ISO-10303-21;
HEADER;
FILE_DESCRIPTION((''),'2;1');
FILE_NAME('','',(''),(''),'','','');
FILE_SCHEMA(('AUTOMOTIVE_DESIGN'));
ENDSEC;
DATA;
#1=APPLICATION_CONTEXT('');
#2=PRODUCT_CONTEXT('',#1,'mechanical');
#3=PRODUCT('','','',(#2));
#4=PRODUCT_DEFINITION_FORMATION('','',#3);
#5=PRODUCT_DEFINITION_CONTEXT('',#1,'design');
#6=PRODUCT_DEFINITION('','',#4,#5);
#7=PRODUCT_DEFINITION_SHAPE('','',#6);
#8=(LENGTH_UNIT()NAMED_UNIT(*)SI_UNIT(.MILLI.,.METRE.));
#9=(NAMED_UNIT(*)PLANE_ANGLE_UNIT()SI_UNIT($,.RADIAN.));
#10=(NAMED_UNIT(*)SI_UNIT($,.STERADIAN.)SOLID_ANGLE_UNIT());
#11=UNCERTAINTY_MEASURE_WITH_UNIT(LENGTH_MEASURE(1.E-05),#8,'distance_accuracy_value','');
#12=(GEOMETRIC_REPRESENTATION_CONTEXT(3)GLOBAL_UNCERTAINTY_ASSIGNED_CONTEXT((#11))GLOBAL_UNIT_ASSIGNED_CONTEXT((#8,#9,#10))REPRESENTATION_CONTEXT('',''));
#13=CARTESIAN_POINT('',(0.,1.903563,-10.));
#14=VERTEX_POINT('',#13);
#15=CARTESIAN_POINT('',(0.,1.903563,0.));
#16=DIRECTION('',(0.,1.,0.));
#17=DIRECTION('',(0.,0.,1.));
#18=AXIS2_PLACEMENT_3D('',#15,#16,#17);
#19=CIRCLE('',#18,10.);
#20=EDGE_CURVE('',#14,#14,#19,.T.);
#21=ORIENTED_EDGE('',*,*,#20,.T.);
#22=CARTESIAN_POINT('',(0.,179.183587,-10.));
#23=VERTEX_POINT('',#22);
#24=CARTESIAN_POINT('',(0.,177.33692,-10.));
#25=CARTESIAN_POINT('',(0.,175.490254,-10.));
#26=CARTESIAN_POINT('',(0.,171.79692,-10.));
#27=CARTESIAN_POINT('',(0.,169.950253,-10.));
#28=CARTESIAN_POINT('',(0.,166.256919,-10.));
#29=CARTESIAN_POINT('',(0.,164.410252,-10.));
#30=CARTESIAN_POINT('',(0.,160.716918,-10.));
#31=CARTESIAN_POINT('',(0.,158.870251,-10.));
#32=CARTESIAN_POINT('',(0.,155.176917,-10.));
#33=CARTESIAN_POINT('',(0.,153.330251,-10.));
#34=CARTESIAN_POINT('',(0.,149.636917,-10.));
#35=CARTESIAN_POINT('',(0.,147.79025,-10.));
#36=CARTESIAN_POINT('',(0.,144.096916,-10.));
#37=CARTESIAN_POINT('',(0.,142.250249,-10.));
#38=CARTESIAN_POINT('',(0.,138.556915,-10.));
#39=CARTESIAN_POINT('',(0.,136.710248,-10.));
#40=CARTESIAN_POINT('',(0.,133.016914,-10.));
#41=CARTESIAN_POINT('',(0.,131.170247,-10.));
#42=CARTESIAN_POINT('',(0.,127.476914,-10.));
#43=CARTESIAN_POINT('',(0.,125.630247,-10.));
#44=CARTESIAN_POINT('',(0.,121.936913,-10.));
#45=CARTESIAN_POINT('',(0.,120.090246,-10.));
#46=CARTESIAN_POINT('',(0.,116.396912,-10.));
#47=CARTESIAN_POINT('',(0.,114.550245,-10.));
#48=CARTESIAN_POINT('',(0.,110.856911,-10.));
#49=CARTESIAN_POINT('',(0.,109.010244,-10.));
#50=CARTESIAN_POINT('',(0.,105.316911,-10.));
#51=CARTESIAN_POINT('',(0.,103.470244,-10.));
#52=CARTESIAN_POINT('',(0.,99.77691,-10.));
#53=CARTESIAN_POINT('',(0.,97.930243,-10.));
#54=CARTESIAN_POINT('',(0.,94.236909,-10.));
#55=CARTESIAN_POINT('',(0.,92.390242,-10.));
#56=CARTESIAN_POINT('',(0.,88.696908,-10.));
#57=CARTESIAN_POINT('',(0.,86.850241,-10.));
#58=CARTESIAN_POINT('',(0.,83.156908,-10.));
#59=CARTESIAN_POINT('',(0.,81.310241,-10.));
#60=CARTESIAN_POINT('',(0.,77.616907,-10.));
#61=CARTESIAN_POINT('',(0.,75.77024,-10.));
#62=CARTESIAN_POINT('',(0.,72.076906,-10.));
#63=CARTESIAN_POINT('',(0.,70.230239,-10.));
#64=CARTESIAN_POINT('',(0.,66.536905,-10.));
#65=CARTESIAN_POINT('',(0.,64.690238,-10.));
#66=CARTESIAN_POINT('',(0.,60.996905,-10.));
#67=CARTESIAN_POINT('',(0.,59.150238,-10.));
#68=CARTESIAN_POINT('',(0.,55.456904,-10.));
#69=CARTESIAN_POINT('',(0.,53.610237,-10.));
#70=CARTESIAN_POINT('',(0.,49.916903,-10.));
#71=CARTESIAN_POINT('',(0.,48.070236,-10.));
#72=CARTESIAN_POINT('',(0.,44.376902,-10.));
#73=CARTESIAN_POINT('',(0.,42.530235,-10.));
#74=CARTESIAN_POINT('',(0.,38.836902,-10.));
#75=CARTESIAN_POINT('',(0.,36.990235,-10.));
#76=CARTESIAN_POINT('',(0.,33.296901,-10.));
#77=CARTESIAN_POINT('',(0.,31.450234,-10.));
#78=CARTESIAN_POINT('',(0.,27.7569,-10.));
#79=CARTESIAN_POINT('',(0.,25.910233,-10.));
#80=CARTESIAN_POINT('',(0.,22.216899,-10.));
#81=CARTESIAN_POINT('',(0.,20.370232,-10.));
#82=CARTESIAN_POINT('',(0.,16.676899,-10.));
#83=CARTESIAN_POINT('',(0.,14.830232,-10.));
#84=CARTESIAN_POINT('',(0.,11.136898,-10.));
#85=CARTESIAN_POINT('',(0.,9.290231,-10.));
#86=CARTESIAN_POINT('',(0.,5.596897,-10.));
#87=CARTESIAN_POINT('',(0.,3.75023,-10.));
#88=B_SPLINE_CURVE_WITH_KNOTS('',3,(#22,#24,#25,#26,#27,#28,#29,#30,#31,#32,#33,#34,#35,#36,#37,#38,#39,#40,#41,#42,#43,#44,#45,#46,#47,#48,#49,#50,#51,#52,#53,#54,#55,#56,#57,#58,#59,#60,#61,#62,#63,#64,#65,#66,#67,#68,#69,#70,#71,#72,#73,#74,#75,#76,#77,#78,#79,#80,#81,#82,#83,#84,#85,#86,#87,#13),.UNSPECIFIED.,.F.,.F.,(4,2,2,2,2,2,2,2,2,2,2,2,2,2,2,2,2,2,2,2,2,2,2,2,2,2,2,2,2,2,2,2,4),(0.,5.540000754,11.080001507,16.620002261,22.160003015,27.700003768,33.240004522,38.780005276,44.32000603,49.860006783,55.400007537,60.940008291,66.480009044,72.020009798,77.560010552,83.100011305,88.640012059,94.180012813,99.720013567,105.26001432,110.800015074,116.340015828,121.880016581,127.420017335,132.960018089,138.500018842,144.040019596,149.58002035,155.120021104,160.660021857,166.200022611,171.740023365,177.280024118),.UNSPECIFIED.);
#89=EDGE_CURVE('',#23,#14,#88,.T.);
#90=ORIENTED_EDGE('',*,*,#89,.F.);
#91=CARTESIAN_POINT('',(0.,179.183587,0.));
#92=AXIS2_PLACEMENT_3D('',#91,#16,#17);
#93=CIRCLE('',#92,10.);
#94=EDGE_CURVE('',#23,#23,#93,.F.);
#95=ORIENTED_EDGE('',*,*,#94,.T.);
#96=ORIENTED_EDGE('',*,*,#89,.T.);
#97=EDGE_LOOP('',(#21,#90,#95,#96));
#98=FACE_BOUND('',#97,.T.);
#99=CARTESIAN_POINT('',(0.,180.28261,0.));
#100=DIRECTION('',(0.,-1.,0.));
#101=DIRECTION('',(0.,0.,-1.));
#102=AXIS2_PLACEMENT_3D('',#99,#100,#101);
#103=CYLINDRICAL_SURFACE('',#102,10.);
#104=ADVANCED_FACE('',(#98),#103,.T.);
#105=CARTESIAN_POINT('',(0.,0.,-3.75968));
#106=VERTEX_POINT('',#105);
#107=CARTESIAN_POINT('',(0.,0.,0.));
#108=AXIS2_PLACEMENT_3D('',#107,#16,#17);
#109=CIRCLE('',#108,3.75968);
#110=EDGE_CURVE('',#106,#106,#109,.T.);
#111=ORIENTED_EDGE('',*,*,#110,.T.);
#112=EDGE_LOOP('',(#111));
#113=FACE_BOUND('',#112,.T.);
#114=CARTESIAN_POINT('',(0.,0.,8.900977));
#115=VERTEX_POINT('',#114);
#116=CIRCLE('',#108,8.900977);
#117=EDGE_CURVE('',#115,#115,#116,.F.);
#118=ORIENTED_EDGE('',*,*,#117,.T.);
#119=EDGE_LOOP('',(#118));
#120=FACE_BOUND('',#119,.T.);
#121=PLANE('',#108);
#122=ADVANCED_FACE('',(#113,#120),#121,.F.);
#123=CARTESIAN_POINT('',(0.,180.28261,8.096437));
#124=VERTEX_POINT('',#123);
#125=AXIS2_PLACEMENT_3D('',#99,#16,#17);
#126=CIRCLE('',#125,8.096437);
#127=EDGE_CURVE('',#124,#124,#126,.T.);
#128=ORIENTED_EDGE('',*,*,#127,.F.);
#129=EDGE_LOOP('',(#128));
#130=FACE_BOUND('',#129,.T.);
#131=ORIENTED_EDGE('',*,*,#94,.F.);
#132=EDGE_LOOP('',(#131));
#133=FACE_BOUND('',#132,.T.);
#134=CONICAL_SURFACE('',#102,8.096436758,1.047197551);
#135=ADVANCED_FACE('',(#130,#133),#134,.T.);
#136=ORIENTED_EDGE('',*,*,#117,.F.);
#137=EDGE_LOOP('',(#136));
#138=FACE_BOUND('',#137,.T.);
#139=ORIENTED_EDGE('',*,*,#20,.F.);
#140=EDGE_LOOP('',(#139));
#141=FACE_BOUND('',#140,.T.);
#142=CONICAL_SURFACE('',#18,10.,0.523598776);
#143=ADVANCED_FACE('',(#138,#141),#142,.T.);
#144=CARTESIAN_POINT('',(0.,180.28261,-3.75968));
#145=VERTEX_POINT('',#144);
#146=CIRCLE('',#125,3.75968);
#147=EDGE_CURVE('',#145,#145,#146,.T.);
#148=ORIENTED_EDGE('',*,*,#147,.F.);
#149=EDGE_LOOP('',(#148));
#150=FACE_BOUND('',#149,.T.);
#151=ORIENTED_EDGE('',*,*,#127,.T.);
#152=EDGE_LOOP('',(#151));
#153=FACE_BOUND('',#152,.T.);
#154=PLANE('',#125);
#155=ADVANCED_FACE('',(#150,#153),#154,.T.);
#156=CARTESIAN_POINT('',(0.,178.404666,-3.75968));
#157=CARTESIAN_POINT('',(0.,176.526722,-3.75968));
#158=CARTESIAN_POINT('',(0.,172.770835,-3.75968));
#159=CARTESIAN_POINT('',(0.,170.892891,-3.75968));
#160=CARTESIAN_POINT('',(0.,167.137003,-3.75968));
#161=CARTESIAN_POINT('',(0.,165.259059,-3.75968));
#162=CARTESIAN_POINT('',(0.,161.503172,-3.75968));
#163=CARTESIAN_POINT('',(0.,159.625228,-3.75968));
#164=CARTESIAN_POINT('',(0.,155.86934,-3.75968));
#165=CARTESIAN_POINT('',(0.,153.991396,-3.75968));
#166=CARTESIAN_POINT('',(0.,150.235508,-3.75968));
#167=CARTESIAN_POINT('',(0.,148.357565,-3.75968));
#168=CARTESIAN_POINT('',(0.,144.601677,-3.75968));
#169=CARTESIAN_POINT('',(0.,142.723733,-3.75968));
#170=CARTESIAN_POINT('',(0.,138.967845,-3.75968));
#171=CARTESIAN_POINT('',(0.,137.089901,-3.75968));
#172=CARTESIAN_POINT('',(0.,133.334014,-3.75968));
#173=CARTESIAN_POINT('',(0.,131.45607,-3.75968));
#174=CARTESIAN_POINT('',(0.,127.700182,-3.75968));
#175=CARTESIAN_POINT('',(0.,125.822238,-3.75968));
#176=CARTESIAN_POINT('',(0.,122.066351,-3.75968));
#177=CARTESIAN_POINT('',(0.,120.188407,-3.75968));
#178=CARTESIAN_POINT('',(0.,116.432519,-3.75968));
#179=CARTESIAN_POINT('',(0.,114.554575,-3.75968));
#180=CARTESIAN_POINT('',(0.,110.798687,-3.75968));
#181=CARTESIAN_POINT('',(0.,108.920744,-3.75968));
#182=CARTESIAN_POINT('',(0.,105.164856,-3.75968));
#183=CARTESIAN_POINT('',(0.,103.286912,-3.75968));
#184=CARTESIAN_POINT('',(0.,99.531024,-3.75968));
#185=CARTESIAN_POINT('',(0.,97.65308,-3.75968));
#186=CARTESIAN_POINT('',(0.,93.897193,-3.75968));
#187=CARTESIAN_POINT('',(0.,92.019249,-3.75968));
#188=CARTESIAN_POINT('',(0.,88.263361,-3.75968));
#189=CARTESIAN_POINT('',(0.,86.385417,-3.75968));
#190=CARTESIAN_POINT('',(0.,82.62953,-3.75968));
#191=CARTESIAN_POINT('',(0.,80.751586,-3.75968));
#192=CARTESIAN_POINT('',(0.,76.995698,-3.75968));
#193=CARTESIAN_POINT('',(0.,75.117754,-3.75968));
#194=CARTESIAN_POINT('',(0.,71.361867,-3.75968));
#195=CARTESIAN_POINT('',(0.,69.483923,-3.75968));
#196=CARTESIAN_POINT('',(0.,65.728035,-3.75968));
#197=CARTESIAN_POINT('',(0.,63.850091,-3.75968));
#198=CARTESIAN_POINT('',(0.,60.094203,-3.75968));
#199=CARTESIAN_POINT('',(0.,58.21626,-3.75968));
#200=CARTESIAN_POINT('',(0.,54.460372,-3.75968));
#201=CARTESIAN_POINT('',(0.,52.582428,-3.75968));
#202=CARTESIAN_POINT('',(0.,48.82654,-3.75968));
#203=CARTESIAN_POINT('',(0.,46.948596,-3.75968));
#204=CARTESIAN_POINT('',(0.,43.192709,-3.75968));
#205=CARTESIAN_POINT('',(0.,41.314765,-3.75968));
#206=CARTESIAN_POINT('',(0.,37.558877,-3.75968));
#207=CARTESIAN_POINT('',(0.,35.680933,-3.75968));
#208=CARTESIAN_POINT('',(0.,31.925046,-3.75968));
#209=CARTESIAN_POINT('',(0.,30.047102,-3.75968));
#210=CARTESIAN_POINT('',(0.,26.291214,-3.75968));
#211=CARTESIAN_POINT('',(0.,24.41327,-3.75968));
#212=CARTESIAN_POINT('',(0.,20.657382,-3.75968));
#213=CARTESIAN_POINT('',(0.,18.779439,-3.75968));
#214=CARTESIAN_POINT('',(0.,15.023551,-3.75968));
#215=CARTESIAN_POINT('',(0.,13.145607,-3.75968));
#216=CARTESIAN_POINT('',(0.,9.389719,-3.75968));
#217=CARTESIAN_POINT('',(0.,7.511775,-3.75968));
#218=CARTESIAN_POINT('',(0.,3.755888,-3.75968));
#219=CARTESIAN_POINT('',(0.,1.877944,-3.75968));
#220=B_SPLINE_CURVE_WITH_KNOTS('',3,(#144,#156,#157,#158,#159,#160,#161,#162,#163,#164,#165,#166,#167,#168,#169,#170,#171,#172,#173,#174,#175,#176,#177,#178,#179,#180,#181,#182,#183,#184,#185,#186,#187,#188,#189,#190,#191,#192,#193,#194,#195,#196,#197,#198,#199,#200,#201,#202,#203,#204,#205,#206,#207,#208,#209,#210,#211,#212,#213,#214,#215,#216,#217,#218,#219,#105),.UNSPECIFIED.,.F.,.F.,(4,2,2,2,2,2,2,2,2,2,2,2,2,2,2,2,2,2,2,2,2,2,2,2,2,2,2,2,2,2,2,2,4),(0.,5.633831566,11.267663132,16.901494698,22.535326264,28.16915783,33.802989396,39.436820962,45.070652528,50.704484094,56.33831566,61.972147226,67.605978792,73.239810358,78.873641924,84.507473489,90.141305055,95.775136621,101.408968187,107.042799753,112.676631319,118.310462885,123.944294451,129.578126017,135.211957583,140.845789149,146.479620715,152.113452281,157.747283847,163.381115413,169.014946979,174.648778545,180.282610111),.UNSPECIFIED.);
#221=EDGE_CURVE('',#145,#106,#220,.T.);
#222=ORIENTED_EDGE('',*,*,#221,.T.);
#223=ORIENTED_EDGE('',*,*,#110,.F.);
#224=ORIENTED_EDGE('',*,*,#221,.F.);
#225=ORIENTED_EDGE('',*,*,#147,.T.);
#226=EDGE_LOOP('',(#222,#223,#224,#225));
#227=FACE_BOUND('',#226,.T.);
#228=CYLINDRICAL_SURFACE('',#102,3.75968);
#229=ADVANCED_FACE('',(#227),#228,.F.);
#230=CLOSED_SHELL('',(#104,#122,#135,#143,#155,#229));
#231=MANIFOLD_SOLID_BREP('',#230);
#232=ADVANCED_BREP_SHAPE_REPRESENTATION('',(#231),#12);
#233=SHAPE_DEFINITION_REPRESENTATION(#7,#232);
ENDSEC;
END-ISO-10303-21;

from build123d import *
from OCP.BRepFilletAPI import BRepFilletAPI_MakeChamfer

# Parameters (mm, degrees)
SKETCH1_R           = 10
BOSS_EXTRUDE1_DEPTH = 180.282610111
SKETCH2_R           = 3.759680006
CUT_EXTRUDE1_DEPTH  = 181.836444083
CHAMFER1_SIZE       = 1.09902275
CHAMFER1_SIZE2      = 1.903563242


with BuildPart() as part:
    # Sketch1 → Boss-Extrude1 (new body)
    with BuildSketch(Plane(origin=(0, 0, 0), x_dir=(1, 0, 0), z_dir=(0, 1, 0))):
        Circle(SKETCH1_R)
    extrude(amount=BOSS_EXTRUDE1_DEPTH)

    # Sketch2 → Cut-Extrude1 (cut, through all)
    with BuildSketch(Plane(origin=(0, 0, 0), x_dir=(1, 0, 0), z_dir=(0, 1, 0))):
        Circle(SKETCH2_R)
    extrude(amount=CUT_EXTRUDE1_DEPTH, mode=Mode.SUBTRACT)

    # Chamfer1: one chamfer whose edges measure the first distance from different faces: ONE call of the kernel's chamfer builder (chamfer() names one face for all edges)
    chamfer1_edges_1 = [part.edges().sort_by_distance(p)[0] for p in [
        (-10, 180.282610111, 0),
    ]]
    chamfer1_side_1 = [part.faces().sort_by_distance(p)[0] for p in [
        (-10, 90.141305055, 0),
    ]]
    chamfer1_edges_2 = [part.edges().sort_by_distance(p)[0] for p in [
        (-10, 0, 0),
    ]]
    chamfer1_side_2 = [part.faces().sort_by_distance(p)[0] for p in [
        (-9.717157288, 0, 0),
    ]]
    chamfer1 = BRepFilletAPI_MakeChamfer(part.part.solid().wrapped)
    for e in chamfer1_edges_1:
        chamfer1.Add(CHAMFER1_SIZE, CHAMFER1_SIZE2, e.wrapped, chamfer1_side_1[0].wrapped)  # the first distance lies on this face
    for e in chamfer1_edges_2:
        chamfer1.Add(CHAMFER1_SIZE, CHAMFER1_SIZE2, e.wrapped, chamfer1_side_2[0].wrapped)  # the first distance lies on this face
    add(Compound.cast(chamfer1.Shape()), mode=Mode.REPLACE)


solid = part.part
